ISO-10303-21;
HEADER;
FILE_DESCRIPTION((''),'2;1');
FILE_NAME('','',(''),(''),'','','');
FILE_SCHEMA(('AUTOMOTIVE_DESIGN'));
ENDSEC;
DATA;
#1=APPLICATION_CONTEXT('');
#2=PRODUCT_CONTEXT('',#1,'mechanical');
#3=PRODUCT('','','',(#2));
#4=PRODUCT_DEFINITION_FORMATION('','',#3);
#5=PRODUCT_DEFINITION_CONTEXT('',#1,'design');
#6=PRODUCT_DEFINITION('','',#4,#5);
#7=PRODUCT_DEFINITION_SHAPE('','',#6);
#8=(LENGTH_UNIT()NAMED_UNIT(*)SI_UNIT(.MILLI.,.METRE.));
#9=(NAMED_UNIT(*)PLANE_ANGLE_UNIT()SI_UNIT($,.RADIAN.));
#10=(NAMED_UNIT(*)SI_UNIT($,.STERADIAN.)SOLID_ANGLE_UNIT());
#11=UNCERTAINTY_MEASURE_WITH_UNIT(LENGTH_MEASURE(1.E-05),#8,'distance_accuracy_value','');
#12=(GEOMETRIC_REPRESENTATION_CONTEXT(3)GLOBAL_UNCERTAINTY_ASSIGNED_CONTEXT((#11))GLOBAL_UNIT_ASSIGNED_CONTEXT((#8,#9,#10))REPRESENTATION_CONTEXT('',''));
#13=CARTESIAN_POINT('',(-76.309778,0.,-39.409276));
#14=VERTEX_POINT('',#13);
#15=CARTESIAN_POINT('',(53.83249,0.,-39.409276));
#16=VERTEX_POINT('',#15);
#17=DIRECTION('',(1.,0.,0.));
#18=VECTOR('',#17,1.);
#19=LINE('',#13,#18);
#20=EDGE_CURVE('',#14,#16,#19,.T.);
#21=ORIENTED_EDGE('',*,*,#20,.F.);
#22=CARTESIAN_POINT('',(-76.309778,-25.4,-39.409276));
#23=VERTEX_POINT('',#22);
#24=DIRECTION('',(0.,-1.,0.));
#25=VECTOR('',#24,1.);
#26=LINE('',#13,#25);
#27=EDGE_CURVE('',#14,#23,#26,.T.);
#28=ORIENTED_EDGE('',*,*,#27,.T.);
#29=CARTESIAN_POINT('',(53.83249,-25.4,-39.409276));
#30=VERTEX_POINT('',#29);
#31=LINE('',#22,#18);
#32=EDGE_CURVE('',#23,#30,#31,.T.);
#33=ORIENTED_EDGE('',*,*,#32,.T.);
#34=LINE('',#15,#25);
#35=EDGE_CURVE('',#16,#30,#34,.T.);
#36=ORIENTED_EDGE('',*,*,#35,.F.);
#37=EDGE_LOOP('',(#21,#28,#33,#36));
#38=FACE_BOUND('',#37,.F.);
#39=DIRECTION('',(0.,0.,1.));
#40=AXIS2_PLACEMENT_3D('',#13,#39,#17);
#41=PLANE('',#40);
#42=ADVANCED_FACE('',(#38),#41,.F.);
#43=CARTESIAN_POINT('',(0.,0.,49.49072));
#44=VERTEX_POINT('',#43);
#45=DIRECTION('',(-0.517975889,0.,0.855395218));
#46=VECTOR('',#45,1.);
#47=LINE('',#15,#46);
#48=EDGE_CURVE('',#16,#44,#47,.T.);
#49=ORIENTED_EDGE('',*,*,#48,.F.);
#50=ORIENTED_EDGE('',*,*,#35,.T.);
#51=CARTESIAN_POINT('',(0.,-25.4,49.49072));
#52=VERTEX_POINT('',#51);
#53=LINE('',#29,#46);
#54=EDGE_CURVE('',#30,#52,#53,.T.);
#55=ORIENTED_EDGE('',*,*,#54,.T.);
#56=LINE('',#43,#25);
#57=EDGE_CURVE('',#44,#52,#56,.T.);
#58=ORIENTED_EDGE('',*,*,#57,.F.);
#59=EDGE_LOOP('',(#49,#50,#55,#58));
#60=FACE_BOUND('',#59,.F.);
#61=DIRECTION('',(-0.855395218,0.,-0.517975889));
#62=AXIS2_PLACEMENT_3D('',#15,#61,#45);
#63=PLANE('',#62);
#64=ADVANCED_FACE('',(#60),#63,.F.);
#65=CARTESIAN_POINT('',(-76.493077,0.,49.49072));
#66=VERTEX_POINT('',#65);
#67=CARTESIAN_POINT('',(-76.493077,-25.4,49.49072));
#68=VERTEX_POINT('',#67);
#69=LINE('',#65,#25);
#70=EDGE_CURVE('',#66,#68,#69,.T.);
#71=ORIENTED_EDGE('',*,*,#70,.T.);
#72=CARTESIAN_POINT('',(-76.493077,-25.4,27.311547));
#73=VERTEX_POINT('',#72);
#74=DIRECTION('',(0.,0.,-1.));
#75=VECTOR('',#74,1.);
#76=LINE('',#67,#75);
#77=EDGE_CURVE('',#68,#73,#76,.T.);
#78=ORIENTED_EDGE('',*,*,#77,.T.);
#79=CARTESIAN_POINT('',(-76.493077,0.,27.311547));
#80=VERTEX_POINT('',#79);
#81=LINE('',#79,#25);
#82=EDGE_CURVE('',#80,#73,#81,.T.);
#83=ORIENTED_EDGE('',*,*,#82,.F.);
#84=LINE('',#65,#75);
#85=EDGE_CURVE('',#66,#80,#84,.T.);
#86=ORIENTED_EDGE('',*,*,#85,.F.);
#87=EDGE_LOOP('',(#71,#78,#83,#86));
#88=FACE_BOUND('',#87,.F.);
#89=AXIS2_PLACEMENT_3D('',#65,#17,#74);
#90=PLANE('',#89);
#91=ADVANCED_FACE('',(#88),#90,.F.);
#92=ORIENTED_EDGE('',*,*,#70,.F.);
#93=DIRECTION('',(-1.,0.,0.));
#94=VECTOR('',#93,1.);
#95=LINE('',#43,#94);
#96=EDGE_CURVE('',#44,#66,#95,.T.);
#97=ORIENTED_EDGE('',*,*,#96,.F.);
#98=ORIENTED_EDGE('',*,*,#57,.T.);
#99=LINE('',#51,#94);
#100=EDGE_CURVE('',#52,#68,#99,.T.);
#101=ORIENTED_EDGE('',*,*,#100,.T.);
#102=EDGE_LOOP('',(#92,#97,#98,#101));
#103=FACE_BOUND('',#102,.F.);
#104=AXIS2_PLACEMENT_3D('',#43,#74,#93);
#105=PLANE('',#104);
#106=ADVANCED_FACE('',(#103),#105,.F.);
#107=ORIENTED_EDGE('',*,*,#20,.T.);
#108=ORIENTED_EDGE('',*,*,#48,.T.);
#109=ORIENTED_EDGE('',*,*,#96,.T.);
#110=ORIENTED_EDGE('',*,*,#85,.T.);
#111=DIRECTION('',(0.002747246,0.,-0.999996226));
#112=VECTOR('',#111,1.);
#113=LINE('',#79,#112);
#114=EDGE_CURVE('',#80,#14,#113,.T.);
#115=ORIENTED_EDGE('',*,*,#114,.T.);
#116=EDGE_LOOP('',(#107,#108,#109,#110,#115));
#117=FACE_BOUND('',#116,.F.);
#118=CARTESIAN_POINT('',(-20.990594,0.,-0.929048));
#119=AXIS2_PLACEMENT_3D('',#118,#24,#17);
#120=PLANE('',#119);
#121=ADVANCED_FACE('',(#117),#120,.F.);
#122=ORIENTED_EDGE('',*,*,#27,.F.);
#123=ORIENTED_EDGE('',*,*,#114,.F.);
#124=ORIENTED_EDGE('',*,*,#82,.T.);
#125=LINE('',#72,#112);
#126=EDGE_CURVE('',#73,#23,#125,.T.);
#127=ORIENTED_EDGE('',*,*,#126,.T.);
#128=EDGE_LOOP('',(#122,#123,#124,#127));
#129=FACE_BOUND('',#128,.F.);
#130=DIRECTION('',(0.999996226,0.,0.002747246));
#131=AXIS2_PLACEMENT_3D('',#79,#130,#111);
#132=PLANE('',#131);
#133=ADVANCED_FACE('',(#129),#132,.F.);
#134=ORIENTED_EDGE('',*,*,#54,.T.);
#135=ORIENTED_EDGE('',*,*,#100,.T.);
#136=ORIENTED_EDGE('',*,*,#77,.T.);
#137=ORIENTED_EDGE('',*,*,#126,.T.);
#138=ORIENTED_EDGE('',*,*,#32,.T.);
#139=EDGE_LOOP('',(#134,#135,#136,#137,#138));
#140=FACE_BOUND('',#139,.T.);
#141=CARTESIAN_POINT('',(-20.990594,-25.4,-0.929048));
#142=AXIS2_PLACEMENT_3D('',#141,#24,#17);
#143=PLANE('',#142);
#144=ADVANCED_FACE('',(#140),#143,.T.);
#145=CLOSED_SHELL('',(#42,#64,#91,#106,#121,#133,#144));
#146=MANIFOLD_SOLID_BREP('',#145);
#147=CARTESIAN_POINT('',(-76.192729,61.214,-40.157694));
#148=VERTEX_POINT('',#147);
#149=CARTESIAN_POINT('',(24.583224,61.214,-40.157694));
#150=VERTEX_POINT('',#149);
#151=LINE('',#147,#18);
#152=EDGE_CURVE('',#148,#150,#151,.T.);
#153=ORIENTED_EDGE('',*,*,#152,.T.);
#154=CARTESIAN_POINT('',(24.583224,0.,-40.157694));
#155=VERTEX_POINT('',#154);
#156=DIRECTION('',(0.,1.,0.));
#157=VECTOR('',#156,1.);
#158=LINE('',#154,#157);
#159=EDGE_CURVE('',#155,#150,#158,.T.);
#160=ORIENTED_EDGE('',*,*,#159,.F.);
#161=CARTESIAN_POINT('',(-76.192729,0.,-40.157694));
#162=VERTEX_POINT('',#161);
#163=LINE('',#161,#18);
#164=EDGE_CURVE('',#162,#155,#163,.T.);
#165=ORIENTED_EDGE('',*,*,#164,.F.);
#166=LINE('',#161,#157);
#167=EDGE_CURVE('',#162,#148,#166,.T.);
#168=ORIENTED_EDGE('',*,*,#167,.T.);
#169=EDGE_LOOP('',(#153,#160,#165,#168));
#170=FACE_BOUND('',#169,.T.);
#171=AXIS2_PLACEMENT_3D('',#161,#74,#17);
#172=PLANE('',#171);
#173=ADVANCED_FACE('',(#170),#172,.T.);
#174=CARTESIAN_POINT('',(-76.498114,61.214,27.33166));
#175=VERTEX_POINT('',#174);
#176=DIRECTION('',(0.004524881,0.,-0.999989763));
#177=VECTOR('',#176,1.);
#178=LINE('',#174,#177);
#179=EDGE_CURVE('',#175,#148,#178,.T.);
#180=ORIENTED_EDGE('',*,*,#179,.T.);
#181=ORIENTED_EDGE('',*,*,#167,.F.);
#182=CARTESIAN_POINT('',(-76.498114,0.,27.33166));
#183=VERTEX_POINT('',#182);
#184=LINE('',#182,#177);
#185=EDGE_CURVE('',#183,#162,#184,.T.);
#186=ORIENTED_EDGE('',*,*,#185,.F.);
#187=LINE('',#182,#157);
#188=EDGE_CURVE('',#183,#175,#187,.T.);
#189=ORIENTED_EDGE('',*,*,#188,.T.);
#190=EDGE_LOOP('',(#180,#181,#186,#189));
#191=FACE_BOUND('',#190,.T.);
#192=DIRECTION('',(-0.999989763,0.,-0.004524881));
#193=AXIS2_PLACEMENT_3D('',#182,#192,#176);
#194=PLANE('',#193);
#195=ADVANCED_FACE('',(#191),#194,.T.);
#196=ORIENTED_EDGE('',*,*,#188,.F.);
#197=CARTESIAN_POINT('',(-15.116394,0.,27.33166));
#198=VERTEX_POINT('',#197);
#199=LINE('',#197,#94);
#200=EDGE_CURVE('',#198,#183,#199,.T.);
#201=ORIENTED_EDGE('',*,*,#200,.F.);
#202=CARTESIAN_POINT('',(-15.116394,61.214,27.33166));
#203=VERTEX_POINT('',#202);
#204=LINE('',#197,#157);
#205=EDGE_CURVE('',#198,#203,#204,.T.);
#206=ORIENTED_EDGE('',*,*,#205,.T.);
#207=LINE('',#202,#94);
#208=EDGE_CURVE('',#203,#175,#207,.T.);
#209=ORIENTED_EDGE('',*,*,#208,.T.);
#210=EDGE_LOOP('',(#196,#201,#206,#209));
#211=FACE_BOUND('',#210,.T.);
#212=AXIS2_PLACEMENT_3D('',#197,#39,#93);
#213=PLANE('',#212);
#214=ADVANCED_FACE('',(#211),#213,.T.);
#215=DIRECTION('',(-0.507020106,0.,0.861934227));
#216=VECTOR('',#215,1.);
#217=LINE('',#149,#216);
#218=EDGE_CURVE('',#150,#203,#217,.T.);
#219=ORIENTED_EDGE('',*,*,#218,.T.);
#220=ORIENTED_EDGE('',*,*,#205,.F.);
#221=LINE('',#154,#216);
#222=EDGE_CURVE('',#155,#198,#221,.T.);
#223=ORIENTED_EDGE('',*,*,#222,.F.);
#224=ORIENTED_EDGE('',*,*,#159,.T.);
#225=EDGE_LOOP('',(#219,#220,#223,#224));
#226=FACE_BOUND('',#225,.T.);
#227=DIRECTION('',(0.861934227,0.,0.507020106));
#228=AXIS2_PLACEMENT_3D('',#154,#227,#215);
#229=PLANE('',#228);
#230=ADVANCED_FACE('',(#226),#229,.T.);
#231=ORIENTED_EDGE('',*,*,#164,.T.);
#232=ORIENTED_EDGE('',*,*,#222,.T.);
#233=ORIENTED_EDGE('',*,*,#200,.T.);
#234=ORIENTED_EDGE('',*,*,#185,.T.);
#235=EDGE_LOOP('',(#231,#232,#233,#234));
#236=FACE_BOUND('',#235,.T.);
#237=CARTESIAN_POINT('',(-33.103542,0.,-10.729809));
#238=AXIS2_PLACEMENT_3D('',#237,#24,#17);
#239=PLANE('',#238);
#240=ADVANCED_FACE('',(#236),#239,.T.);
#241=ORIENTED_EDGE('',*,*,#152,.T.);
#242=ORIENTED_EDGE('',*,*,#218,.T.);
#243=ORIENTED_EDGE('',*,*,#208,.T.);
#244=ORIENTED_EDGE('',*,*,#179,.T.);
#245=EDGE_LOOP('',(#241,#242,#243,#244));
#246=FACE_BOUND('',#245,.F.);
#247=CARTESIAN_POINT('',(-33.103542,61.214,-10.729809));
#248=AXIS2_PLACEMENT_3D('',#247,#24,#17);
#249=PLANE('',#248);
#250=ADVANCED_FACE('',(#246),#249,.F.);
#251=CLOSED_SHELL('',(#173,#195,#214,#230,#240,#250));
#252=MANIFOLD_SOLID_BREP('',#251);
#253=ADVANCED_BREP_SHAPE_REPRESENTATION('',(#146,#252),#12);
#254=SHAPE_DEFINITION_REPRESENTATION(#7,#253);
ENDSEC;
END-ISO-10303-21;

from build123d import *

# Parameters (mm, degrees)
F1_DEPTH = 61.214
F3_DEPTH = 25.4


with BuildPart() as f1:
    # F0 (on Front) → F1 (new body)
    with BuildSketch(Plane.XZ):
        Polygon((-15.1163935661, 27.3316595703), (-76.4981135726, 27.3316595703), (-76.1927291751, -40.1576943696), (24.5832242072, -40.1576943696), align=None)
    extrude(amount=-F1_DEPTH)


with BuildPart() as f3:
    # F2 (on Front) → F3 (new body)
    with BuildSketch(Plane.XZ):
        Polygon((-76.4930769801, 49.4907200336), (-76.4930769801, 27.311546728), (-76.3097777963, -39.409276098), (53.8324899971, -39.409276098), (0, 49.4907200336), align=None)
    extrude(amount=F3_DEPTH)


solid = Compound([f1.part, f3.part])
